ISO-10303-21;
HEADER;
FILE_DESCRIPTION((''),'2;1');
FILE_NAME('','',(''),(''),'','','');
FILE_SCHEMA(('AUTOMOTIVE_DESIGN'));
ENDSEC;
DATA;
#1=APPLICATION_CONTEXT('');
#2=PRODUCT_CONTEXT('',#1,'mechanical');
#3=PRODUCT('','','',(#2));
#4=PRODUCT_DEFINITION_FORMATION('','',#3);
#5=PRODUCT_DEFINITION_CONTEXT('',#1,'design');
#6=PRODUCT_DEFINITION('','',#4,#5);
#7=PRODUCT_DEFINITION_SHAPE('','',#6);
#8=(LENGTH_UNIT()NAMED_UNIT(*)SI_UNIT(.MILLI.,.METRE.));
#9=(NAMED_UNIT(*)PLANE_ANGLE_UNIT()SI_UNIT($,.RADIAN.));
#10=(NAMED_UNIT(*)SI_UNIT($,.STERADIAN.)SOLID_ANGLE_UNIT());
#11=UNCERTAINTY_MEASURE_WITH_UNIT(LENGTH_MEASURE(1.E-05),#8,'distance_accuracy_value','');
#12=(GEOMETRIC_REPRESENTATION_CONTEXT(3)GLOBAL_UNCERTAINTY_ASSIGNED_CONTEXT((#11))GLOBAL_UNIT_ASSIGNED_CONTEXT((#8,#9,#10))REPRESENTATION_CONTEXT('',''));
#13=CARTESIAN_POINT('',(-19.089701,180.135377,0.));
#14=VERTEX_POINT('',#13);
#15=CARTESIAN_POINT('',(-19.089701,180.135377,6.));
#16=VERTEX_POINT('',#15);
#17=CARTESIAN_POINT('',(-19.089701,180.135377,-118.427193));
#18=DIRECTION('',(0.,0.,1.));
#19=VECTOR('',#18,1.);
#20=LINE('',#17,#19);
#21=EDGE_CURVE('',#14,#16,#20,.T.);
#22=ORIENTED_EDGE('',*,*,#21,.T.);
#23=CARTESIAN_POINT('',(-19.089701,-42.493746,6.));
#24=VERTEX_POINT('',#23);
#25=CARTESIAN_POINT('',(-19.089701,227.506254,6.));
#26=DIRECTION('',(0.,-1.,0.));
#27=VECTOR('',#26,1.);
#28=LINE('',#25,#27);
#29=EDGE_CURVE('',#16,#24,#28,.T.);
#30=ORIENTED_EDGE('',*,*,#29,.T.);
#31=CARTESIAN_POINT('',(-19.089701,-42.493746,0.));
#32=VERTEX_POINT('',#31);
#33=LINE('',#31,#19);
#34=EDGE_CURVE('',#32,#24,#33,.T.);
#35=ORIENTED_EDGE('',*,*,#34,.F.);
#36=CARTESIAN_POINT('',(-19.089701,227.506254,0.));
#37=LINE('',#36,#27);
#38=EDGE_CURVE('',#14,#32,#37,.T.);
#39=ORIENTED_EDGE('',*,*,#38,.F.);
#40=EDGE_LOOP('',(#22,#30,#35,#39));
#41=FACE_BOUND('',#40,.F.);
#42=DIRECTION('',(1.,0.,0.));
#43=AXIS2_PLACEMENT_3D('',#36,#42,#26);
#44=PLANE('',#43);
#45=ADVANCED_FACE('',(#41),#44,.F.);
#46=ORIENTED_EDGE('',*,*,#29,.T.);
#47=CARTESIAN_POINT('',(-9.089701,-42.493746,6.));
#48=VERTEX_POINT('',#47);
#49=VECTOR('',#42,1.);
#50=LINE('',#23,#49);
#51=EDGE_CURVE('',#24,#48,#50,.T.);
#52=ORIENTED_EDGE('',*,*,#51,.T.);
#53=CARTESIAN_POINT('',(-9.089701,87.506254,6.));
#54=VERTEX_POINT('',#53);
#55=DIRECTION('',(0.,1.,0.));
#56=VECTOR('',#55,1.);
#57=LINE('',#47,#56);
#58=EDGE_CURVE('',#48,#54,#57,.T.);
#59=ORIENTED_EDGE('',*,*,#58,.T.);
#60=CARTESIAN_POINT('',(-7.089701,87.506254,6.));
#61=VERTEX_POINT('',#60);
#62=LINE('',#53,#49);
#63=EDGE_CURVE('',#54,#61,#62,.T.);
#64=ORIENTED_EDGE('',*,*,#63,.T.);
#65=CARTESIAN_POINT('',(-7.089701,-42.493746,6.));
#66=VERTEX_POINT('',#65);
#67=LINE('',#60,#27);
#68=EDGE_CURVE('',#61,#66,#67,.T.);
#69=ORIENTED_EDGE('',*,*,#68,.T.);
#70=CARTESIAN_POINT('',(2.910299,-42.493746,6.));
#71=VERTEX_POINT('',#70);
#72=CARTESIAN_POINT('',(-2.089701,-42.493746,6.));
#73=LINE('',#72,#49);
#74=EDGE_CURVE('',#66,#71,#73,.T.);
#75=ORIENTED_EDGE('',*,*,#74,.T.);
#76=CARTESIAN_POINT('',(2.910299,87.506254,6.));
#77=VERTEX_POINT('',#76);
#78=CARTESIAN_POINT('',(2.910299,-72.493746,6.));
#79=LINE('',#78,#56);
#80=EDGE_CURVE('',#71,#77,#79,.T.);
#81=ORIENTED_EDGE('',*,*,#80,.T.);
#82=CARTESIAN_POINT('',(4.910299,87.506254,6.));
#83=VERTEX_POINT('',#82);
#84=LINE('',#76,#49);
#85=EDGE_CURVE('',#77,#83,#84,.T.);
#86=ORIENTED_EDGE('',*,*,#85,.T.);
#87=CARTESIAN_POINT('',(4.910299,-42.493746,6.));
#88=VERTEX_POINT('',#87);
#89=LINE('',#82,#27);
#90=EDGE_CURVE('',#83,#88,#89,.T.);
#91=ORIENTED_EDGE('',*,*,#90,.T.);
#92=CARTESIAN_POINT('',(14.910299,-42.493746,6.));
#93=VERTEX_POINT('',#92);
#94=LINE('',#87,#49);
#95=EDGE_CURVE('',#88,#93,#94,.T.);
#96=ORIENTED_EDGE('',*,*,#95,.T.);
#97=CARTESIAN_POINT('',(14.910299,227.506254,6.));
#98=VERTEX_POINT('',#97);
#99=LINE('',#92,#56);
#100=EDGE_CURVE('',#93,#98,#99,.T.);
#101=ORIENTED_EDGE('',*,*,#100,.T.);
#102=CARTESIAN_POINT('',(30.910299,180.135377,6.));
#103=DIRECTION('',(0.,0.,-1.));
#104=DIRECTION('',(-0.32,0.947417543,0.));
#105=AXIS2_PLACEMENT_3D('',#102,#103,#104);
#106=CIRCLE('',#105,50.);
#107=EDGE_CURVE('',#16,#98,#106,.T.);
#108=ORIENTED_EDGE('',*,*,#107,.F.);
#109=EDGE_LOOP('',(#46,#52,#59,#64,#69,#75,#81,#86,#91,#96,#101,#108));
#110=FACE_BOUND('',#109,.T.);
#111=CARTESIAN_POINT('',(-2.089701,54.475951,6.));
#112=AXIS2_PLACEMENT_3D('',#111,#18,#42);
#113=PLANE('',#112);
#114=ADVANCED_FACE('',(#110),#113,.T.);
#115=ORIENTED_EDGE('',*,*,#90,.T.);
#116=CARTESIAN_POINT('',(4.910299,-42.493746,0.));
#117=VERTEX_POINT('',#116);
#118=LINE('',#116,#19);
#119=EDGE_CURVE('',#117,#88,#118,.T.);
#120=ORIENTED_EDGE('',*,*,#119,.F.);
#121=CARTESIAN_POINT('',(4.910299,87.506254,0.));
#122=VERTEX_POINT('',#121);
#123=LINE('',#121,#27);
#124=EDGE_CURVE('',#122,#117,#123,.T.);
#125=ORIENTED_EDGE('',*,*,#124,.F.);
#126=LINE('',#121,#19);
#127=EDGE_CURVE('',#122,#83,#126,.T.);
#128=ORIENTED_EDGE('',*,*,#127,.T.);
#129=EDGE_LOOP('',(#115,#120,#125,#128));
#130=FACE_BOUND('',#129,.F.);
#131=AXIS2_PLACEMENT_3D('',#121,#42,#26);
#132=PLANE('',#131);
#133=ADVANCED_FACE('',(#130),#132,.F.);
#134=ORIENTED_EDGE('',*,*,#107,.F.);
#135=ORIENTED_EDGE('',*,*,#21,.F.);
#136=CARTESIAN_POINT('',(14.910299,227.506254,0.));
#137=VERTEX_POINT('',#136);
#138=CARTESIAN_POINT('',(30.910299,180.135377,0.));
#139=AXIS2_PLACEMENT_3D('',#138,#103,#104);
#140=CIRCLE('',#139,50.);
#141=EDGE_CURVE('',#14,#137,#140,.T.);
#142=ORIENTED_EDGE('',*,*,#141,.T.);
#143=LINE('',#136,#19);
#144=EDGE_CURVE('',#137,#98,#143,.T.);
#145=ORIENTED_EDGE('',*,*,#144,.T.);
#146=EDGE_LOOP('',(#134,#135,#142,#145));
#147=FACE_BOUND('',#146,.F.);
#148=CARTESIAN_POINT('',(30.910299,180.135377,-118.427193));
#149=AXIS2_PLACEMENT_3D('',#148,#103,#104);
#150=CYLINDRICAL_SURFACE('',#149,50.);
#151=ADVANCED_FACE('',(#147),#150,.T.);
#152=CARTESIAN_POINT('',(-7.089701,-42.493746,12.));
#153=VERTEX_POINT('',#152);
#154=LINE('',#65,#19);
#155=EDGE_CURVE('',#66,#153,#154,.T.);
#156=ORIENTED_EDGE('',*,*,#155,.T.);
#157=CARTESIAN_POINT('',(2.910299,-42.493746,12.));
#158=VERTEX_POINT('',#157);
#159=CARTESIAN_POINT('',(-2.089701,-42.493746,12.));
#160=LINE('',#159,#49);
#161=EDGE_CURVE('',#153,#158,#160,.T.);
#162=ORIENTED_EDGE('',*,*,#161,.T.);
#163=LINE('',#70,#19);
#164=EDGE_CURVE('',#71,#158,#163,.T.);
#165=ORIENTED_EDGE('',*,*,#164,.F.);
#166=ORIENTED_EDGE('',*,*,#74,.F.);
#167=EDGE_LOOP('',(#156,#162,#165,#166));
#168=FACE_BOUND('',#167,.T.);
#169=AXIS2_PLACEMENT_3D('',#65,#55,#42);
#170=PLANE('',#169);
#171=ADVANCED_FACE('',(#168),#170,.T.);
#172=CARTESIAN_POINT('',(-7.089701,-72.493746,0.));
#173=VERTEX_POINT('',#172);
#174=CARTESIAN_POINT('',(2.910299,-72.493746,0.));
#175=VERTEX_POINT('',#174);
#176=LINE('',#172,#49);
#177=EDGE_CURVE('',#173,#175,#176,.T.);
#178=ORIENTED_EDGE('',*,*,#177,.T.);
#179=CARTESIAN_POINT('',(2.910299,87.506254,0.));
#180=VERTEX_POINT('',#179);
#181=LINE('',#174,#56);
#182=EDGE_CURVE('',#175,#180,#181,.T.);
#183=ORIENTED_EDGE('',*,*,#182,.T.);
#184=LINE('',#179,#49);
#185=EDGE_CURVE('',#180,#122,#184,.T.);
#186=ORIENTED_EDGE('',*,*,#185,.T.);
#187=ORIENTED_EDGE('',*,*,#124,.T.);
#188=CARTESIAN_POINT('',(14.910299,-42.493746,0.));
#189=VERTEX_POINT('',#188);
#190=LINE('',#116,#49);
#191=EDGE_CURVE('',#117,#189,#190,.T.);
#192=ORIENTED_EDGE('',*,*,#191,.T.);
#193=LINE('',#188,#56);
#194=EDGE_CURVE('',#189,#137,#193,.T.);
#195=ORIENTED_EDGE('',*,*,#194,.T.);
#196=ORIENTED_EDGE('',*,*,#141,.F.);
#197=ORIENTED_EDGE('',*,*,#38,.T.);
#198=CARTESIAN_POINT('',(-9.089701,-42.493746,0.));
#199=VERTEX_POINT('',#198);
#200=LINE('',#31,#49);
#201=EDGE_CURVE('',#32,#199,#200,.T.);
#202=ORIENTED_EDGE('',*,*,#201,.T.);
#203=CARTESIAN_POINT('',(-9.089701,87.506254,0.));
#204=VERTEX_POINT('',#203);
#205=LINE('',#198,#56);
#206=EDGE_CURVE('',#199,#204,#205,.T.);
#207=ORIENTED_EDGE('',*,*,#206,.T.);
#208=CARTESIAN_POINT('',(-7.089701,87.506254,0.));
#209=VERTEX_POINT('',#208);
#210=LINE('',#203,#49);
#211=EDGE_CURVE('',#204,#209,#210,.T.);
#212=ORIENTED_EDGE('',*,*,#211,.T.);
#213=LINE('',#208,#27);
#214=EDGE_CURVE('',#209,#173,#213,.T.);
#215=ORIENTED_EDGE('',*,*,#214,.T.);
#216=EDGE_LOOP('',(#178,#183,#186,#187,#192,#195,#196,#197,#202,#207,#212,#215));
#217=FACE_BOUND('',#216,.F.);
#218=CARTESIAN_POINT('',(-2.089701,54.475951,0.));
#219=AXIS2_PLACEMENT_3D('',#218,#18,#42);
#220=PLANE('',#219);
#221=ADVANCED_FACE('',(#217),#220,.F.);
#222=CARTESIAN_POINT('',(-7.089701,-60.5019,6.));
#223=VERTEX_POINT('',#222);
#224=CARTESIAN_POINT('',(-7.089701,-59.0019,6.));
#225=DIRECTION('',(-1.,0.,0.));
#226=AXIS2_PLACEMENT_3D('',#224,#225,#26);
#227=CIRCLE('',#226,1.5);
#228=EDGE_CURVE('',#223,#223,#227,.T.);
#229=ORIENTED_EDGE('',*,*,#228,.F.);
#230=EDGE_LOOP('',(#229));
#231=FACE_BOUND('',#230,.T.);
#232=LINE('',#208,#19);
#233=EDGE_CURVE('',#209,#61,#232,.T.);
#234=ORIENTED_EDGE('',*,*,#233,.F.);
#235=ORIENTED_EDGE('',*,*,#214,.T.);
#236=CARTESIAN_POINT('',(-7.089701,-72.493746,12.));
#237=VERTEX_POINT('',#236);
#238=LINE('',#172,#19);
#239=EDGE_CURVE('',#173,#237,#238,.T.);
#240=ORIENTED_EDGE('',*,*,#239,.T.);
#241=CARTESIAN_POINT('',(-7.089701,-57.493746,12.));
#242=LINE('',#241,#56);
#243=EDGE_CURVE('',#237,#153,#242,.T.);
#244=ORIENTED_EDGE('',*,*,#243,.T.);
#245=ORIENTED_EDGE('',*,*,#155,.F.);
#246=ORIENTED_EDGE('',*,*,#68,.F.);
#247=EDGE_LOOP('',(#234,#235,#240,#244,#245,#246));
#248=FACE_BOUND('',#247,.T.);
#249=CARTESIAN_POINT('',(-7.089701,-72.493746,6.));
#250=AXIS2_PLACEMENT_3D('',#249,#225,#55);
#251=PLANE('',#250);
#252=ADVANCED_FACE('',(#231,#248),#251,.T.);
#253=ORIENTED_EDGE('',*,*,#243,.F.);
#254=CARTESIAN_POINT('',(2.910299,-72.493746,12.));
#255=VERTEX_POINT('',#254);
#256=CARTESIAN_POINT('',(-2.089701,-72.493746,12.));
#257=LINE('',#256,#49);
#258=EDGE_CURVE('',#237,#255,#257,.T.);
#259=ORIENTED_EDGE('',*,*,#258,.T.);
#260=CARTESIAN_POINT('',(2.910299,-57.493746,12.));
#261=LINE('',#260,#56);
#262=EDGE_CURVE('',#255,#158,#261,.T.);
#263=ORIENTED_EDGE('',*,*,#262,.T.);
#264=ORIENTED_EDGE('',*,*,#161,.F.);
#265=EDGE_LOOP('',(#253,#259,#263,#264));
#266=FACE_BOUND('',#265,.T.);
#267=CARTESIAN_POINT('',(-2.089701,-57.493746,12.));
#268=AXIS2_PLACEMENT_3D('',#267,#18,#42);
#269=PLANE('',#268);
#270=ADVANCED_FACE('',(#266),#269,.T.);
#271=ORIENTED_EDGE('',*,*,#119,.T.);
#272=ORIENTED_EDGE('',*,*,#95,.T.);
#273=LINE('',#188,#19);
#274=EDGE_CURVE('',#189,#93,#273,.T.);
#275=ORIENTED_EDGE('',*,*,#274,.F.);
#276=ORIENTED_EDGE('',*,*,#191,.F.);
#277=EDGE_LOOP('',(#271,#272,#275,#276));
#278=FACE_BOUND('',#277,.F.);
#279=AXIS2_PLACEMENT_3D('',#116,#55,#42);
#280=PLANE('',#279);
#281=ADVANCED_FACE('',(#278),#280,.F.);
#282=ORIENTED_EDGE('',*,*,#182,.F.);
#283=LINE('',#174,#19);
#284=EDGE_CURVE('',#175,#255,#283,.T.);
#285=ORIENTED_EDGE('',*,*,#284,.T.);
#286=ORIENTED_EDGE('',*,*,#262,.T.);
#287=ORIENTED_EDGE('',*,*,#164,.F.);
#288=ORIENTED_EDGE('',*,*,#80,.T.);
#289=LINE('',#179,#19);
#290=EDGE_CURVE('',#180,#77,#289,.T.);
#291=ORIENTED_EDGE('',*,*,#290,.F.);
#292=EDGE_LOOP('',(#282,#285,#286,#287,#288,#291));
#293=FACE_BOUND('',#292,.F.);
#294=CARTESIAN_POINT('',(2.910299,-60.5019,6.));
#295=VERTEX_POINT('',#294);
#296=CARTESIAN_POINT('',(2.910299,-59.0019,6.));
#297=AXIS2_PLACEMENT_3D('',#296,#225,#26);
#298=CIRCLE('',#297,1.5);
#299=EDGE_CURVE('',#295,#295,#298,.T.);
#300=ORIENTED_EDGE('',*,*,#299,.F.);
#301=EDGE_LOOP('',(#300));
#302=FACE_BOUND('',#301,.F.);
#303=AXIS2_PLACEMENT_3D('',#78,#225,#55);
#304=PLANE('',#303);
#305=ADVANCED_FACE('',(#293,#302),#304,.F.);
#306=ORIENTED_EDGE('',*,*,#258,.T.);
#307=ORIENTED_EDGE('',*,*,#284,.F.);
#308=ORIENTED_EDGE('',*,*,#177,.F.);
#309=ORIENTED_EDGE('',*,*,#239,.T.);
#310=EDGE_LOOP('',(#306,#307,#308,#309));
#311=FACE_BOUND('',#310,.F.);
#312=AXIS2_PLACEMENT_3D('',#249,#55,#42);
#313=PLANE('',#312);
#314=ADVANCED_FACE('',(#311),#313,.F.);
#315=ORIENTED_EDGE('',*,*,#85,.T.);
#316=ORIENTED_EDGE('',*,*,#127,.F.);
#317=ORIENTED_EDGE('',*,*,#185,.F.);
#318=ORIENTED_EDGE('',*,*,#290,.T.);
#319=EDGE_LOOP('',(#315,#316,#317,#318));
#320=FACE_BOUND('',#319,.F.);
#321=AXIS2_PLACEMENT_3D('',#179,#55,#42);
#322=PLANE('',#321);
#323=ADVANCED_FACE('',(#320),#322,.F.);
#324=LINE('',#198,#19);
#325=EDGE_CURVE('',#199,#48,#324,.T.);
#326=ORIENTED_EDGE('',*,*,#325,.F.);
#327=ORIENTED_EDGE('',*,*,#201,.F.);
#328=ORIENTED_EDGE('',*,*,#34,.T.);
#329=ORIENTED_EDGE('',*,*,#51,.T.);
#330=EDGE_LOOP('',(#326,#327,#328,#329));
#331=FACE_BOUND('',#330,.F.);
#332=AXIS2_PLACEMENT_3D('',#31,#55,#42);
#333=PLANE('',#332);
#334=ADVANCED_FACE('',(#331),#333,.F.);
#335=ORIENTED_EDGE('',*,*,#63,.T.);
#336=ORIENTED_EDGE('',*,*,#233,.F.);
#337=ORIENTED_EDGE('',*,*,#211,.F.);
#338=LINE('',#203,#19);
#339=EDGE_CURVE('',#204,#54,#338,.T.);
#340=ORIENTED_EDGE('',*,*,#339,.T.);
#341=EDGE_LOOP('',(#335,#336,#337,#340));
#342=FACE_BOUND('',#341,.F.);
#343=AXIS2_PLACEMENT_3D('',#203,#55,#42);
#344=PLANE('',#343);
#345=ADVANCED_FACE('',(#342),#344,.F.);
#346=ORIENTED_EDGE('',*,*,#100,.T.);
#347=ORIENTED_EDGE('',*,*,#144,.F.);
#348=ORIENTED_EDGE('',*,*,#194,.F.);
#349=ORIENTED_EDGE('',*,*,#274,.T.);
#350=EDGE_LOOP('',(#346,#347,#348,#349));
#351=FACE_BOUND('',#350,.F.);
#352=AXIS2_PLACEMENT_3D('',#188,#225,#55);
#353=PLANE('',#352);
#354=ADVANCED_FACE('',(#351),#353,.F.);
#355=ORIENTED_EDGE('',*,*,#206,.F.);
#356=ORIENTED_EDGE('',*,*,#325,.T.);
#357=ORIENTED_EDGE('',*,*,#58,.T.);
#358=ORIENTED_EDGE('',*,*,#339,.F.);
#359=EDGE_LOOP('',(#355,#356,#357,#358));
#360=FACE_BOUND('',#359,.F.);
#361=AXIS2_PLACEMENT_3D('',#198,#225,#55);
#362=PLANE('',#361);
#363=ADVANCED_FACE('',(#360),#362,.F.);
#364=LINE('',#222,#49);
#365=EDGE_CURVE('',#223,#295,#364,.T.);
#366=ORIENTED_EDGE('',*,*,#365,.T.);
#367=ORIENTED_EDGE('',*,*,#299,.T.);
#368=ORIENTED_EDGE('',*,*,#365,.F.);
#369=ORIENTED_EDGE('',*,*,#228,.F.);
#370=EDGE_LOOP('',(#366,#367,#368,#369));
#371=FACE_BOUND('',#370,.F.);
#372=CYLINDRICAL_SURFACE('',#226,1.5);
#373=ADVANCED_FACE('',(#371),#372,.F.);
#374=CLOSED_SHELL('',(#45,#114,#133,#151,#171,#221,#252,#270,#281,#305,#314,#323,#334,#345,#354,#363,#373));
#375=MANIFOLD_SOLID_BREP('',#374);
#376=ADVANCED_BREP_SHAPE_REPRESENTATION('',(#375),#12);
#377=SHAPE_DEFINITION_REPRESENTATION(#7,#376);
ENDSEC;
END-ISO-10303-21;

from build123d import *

# Parameters (mm, degrees)
F1_DEPTH    = 6
F2_T1_DEPTH = 242.8543856465
F3_W        = 10
F3_H        = 30
F4_DEPTH    = 6
F5_R        = 1.5
F6_DEPTH    = 10


# Not quite as in the source:
# - a fillet or chamfer that OpenCascade refuses, or shapes differently, is made with other operations: its cross-section is extruded or revolved along the edge and cut away or added


with BuildPart() as f1:
    # F0 (on Top) → F1 (new body)
    with BuildSketch(Plane.XY):
        Polygon((14.9102990106, 227.5062542017), (-19.0897009894, 227.5062542017), (-19.0897009894, -42.4937457983), (-9.0897009894, -42.4937457983), (-9.0897009894, 87.5062542017), (-7.0897009894, 87.5062542017), (-7.0897009894, -72.4937457983), (2.9102990106, -72.4937457983), (2.9102990106, 87.5062542017), (4.9102990106, 87.5062542017), (4.9102990106, -42.4937457983), (14.9102990106, -42.4937457983), align=None)
    extrude(amount=F1_DEPTH)

    # F2: fillet of radius 50 on 1 edges, made by hand

    # F2_s2 → F2_t1 (cut)
    with BuildSketch(Plane.XY.offset(-118.4271928233)):
        with BuildLine():
            ThreePointArc((14.9102990106, 227.5062542017), (-9.7098930126, 209.2901365467), (-19.0897009894, 180.1353770724))
            Line((-19.0897009894, 180.1353770724), (-19.0897009894, 227.5062542017))
            Line((-19.0897009894, 227.5062542017), (14.9102990106, 227.5062542017))
        make_face()
    extrude(amount=F2_T1_DEPTH, mode=Mode.SUBTRACT)

    # F3 (on face) → F4 (join)
    with BuildSketch(Plane.XY.offset(6)):
        with Locations((-2.0897009894, -57.4937457983)):
            Rectangle(F3_W, F3_H)
    extrude(amount=F4_DEPTH)

    # F5 (on face) → F6 (cut, through all)
    with BuildSketch(Plane(origin=(-7.0897009894, 0, 0), x_dir=(0, -1, 0), z_dir=(-1, 0, 0))):
        with Locations((59.0019002557, 6)):
            Circle(F5_R)
    extrude(amount=-F6_DEPTH, mode=Mode.SUBTRACT)


solid = f1.part
